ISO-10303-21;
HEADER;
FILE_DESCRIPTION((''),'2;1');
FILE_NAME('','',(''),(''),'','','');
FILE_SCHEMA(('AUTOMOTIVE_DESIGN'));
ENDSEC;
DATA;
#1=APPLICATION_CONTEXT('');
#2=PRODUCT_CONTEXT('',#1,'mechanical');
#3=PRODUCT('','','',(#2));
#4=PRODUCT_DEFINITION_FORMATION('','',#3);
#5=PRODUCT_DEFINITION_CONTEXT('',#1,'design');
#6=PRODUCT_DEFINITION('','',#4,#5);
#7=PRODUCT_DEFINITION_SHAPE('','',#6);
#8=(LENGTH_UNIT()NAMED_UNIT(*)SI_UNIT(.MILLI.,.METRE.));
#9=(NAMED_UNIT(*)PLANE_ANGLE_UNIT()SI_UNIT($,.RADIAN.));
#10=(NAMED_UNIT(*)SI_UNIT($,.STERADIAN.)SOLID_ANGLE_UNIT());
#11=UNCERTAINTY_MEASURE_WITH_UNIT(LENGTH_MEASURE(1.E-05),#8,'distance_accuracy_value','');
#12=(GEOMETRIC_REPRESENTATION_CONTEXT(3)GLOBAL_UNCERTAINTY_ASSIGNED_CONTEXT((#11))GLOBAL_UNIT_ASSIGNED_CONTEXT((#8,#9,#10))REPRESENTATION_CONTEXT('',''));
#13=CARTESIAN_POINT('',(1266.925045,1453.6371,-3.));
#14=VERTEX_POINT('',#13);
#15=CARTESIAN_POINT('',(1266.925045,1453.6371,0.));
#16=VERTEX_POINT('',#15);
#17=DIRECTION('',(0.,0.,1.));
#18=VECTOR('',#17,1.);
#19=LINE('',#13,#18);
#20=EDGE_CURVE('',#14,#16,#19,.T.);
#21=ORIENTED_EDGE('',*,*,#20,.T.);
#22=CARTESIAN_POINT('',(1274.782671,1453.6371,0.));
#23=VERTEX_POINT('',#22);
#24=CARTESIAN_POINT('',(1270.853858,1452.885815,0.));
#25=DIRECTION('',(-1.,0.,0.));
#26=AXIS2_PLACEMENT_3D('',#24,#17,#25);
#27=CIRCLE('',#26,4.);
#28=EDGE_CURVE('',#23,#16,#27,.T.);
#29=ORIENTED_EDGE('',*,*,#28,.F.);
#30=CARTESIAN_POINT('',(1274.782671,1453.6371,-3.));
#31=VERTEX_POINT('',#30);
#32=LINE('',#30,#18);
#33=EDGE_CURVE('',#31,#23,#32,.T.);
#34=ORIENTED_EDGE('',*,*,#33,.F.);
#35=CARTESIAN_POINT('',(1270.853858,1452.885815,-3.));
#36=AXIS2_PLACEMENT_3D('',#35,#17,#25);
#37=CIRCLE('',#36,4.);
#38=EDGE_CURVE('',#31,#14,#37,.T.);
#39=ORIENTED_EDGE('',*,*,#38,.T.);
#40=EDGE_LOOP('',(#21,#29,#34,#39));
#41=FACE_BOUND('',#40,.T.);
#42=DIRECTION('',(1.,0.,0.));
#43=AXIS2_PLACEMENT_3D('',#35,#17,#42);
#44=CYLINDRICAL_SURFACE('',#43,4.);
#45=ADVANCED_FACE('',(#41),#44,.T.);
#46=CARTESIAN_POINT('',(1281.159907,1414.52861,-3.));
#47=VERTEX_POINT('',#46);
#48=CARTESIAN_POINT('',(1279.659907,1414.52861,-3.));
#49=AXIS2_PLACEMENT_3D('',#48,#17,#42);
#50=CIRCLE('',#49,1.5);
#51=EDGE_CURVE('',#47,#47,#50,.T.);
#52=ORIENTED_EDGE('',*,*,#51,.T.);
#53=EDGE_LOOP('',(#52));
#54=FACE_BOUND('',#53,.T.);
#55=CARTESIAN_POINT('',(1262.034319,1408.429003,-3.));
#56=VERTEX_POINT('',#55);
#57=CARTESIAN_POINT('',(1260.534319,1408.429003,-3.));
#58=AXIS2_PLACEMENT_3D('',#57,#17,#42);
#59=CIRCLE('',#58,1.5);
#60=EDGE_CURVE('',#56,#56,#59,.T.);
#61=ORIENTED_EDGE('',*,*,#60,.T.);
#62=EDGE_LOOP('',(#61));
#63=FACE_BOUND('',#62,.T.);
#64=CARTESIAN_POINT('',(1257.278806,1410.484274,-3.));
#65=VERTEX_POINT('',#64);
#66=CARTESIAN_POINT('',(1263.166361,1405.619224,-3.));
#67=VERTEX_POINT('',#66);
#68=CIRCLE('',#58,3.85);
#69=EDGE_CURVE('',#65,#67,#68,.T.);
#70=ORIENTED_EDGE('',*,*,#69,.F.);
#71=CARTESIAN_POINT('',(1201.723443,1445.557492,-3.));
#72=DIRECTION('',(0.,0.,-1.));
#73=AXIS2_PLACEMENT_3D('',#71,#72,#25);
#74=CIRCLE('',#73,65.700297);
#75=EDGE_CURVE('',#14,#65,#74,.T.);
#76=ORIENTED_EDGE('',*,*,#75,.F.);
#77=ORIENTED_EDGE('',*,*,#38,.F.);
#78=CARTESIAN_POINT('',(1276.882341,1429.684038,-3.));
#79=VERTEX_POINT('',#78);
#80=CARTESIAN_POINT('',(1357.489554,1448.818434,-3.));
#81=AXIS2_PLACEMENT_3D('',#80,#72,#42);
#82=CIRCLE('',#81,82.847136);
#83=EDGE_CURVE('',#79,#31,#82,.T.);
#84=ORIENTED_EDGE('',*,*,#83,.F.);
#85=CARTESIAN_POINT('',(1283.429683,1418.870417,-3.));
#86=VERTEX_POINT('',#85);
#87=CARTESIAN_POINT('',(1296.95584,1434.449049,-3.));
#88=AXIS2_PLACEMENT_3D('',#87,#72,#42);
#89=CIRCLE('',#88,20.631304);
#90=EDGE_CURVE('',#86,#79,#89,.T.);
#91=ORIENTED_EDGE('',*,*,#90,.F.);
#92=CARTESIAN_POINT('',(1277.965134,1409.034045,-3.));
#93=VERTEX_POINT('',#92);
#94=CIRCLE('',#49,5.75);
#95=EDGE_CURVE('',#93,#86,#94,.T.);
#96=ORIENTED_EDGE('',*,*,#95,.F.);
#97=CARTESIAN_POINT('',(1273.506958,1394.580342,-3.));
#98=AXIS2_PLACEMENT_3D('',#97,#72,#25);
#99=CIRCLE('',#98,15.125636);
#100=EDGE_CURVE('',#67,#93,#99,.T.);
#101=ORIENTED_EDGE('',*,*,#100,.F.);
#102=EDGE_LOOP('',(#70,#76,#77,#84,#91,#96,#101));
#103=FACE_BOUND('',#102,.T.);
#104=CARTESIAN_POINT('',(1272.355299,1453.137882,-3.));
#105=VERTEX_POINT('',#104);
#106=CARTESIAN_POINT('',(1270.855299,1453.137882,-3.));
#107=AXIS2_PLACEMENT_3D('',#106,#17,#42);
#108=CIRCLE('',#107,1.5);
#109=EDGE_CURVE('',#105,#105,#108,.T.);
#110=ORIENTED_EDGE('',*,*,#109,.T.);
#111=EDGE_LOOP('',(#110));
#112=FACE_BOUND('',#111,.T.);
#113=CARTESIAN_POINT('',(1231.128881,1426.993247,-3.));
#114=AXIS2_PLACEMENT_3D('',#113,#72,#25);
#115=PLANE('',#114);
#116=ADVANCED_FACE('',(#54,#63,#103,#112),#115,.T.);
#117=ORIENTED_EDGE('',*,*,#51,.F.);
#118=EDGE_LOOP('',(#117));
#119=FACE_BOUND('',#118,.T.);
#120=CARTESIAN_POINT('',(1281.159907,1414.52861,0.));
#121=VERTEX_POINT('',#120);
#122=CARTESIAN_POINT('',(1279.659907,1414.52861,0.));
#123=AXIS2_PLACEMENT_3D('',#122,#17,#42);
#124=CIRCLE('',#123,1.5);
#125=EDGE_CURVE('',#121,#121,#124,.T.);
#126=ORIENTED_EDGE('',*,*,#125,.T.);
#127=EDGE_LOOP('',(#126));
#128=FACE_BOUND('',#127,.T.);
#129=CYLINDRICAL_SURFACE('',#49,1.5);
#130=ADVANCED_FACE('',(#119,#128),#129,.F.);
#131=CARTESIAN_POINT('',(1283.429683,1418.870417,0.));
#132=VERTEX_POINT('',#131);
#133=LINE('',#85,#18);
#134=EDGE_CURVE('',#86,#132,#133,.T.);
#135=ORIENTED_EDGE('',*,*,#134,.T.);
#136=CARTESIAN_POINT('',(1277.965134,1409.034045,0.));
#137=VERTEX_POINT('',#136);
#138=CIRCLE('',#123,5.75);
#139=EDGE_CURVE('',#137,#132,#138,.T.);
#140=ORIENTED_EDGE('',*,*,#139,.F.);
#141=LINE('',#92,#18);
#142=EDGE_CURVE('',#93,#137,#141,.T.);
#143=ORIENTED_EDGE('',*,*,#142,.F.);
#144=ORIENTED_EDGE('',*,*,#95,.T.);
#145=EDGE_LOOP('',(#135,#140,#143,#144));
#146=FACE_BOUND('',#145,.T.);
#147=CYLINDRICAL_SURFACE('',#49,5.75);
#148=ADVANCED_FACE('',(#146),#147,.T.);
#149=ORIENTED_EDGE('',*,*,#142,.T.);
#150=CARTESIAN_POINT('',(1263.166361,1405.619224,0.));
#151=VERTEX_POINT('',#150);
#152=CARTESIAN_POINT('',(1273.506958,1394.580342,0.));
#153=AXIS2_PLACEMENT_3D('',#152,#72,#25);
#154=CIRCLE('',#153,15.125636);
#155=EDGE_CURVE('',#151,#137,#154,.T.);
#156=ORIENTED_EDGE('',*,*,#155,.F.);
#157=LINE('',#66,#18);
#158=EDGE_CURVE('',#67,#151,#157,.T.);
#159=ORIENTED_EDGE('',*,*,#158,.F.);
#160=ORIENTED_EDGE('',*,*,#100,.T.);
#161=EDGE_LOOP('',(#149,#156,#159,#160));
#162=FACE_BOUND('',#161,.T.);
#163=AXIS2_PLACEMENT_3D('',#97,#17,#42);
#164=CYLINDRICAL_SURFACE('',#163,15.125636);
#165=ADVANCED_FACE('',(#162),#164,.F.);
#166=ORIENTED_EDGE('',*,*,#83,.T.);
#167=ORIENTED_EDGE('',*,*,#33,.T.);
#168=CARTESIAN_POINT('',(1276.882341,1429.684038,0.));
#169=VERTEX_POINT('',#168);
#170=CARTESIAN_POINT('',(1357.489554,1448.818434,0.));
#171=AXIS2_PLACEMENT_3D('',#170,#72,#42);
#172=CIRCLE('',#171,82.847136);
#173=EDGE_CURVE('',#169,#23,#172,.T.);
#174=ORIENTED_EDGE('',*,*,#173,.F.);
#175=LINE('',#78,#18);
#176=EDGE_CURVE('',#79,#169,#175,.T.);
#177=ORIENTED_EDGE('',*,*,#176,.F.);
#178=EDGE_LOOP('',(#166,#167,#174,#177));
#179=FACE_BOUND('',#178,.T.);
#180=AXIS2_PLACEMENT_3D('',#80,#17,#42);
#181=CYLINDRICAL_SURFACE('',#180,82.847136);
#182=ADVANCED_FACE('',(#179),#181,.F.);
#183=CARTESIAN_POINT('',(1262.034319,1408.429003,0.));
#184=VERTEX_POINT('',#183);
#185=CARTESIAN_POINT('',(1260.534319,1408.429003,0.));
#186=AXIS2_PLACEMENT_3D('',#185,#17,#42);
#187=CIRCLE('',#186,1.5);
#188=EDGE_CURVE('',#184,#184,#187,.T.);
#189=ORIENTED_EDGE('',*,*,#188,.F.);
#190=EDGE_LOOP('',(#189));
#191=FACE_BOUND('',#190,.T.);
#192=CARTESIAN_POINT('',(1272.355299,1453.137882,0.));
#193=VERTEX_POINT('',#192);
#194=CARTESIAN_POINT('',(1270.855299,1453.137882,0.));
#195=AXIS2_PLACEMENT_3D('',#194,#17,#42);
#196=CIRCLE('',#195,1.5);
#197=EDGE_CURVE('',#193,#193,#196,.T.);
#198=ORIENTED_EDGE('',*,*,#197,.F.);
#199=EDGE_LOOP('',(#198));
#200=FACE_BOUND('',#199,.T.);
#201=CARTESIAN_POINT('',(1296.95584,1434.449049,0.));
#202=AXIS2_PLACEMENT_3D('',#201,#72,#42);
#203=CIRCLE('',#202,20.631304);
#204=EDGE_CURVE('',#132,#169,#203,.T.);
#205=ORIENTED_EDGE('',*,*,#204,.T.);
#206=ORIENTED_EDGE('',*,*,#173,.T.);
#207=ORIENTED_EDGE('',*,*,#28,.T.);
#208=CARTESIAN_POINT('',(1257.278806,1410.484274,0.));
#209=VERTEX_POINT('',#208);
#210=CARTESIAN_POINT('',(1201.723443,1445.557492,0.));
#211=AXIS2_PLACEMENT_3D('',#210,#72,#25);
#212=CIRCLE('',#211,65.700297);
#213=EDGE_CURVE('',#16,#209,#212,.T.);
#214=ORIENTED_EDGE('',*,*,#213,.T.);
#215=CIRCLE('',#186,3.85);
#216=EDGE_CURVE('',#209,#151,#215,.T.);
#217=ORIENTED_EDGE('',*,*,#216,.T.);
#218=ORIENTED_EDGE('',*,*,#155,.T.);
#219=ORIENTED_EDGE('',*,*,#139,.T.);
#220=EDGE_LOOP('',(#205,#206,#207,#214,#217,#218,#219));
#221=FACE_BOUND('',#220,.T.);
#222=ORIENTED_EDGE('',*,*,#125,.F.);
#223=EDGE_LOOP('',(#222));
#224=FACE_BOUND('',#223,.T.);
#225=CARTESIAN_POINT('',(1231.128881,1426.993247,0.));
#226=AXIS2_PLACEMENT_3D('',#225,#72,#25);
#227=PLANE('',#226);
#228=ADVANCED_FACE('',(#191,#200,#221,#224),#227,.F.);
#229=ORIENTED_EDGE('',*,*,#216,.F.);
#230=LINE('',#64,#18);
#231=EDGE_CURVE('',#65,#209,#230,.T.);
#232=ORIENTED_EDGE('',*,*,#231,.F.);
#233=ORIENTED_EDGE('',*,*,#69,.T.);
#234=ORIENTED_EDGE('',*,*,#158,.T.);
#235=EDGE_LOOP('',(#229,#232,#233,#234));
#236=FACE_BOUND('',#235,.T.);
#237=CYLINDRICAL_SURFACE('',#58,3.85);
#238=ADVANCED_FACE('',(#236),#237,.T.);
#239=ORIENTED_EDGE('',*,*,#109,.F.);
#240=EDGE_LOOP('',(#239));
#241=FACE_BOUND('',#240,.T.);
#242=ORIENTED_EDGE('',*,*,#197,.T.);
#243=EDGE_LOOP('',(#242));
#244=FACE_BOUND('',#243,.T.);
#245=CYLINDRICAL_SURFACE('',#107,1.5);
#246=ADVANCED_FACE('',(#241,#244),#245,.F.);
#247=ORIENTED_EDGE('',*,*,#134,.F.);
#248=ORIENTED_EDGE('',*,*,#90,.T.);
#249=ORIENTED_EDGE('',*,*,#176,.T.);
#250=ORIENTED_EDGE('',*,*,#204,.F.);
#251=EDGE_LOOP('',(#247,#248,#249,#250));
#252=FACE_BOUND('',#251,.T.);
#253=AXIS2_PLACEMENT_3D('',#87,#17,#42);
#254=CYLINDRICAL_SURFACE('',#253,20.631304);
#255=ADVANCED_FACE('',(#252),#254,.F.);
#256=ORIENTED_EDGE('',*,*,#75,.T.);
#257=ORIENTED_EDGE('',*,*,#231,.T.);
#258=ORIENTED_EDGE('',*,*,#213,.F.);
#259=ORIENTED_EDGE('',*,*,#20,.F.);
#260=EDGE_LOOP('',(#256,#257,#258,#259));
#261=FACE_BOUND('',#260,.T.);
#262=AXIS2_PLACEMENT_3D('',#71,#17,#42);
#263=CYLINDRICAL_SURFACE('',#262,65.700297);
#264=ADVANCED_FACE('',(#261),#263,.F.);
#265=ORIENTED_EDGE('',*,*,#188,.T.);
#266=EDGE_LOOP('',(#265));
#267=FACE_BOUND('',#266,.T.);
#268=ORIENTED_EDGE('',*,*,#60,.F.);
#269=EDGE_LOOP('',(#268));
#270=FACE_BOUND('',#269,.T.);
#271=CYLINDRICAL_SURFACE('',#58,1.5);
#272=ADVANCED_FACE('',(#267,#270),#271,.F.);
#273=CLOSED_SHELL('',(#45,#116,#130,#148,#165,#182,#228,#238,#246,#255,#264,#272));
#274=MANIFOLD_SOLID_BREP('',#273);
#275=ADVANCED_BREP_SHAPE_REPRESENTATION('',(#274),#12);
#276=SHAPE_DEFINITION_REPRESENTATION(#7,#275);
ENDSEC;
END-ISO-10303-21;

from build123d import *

# Parameters (mm, degrees)
ESQUISSE1_R               = 1.5
T_LE_DE_BASE_PLI_E1_DEPTH = 3


# Sheet-metal steps are written as plain solids
with BuildPart() as part:
    # Esquisse1 → Tôle de base pliée1 (new body)
    with BuildSketch(Plane.XY):
        with BuildLine():
            ThreePointArc((1266.925045451, 1453.637099805), (1270.853858472, 1456.885815408), (1274.782671493, 1453.637099805))
            ThreePointArc((1274.782671493, 1453.637099805), (1274.958888422, 1441.583989625), (1276.882340742, 1429.684038004))
            ThreePointArc((1276.882340742, 1429.684038004), (1279.307388945, 1423.763410381), (1283.429682965, 1418.870417202))
            ThreePointArc((1283.429682965, 1418.870417202), (1284.686333081, 1411.736203474), (1277.965134068, 1409.03404529))
            ThreePointArc((1277.965134068, 1409.03404529), (1270.106079959, 1409.318689972), (1263.166360558, 1405.619223969))
            ThreePointArc((1263.166360558, 1405.619223969), (1258.081900759, 1405.461151241), (1257.278806491, 1410.484273581))
            ThreePointArc((1257.278806491, 1410.484273581), (1265.841325108, 1431.224793872), (1266.925045451, 1453.637099805))
        make_face()
        with Locations((1279.65990658, 1414.528610435)):
            Circle(ESQUISSE1_R, mode=Mode.SUBTRACT)
        with Locations((1260.534319165, 1408.429002982)):
            Circle(ESQUISSE1_R, mode=Mode.SUBTRACT)
        with Locations((1270.855299475, 1453.137882296)):
            Circle(ESQUISSE1_R, mode=Mode.SUBTRACT)
    extrude(amount=-T_LE_DE_BASE_PLI_E1_DEPTH)


solid = part.part
